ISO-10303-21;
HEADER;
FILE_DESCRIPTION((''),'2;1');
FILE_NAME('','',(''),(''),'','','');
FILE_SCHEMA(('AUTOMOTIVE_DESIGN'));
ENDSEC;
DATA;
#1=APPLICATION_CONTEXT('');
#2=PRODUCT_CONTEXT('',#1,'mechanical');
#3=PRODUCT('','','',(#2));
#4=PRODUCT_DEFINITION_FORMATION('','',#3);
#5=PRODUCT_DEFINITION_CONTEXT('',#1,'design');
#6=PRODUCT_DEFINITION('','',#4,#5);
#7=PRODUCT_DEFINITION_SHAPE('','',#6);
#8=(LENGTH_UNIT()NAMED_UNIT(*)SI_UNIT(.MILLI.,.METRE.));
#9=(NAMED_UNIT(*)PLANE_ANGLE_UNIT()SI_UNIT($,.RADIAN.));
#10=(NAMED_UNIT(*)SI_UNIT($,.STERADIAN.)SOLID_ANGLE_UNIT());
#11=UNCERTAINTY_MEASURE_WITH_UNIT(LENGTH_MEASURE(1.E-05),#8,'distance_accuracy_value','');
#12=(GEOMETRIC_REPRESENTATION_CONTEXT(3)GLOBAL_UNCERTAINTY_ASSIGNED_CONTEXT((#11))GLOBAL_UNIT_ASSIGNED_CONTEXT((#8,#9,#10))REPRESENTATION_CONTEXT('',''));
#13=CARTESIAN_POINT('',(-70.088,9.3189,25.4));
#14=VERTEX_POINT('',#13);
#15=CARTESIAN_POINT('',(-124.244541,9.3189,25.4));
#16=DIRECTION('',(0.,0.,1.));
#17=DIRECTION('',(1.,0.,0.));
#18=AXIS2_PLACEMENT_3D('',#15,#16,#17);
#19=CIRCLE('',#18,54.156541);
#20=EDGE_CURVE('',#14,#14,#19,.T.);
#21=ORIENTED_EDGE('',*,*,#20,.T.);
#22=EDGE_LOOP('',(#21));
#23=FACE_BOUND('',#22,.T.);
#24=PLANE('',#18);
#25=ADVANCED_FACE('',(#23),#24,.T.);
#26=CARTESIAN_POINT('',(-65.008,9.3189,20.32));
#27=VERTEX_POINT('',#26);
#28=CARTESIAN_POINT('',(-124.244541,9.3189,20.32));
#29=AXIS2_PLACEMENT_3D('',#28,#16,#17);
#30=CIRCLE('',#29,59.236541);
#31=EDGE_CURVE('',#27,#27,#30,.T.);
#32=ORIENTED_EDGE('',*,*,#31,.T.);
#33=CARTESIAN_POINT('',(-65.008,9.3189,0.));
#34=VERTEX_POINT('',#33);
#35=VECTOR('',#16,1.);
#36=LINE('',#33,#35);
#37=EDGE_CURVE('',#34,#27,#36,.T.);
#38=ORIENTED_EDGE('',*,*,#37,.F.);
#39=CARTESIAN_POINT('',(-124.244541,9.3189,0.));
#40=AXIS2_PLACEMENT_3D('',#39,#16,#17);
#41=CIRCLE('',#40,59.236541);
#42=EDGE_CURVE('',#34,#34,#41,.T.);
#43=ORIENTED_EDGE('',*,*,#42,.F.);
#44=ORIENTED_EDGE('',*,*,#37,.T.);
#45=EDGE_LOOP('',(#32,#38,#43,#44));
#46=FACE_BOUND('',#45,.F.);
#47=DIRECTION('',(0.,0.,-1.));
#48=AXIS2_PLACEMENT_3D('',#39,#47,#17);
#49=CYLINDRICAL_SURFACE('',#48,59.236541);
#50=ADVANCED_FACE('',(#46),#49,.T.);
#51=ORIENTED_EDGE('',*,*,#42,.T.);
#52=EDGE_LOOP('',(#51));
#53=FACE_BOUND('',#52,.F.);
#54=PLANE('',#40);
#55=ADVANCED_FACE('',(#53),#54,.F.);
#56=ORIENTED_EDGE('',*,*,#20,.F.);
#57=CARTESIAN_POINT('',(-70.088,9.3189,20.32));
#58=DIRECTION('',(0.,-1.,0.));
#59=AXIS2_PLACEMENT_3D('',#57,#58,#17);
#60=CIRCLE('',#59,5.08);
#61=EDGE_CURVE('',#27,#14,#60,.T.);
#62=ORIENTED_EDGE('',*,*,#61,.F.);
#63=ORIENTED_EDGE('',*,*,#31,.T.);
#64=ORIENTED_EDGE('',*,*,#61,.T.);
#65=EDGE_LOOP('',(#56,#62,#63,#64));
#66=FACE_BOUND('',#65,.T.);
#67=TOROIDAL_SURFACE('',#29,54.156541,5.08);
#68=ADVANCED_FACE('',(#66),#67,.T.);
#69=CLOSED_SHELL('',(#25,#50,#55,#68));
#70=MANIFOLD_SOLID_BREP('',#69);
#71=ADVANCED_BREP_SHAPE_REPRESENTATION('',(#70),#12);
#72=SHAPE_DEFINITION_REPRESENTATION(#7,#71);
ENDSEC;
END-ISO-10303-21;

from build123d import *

# Parameters (mm, degrees)
F0_R     = 59.2365413748
F1_DEPTH = 25.4
F2_R     = 5.08


# Not quite as in the source:
# - a feature names something its author has since deleted; it is built from what else it names


with BuildPart() as f1:
    # F0 (on Top) → F1 (new body)
    with BuildSketch(Plane.XY):
        with Locations((-124.2445409298, 9.3189002946)):
            Circle(F0_R)
    extrude(amount=F1_DEPTH)

    # F2
    f2_edges = [f1.edges().sort_by_distance(p)[0] for p in [
        (-183.481082, 9.3189, 25.4),
    ]]
    fillet(f2_edges, radius=F2_R)


solid = f1.part
